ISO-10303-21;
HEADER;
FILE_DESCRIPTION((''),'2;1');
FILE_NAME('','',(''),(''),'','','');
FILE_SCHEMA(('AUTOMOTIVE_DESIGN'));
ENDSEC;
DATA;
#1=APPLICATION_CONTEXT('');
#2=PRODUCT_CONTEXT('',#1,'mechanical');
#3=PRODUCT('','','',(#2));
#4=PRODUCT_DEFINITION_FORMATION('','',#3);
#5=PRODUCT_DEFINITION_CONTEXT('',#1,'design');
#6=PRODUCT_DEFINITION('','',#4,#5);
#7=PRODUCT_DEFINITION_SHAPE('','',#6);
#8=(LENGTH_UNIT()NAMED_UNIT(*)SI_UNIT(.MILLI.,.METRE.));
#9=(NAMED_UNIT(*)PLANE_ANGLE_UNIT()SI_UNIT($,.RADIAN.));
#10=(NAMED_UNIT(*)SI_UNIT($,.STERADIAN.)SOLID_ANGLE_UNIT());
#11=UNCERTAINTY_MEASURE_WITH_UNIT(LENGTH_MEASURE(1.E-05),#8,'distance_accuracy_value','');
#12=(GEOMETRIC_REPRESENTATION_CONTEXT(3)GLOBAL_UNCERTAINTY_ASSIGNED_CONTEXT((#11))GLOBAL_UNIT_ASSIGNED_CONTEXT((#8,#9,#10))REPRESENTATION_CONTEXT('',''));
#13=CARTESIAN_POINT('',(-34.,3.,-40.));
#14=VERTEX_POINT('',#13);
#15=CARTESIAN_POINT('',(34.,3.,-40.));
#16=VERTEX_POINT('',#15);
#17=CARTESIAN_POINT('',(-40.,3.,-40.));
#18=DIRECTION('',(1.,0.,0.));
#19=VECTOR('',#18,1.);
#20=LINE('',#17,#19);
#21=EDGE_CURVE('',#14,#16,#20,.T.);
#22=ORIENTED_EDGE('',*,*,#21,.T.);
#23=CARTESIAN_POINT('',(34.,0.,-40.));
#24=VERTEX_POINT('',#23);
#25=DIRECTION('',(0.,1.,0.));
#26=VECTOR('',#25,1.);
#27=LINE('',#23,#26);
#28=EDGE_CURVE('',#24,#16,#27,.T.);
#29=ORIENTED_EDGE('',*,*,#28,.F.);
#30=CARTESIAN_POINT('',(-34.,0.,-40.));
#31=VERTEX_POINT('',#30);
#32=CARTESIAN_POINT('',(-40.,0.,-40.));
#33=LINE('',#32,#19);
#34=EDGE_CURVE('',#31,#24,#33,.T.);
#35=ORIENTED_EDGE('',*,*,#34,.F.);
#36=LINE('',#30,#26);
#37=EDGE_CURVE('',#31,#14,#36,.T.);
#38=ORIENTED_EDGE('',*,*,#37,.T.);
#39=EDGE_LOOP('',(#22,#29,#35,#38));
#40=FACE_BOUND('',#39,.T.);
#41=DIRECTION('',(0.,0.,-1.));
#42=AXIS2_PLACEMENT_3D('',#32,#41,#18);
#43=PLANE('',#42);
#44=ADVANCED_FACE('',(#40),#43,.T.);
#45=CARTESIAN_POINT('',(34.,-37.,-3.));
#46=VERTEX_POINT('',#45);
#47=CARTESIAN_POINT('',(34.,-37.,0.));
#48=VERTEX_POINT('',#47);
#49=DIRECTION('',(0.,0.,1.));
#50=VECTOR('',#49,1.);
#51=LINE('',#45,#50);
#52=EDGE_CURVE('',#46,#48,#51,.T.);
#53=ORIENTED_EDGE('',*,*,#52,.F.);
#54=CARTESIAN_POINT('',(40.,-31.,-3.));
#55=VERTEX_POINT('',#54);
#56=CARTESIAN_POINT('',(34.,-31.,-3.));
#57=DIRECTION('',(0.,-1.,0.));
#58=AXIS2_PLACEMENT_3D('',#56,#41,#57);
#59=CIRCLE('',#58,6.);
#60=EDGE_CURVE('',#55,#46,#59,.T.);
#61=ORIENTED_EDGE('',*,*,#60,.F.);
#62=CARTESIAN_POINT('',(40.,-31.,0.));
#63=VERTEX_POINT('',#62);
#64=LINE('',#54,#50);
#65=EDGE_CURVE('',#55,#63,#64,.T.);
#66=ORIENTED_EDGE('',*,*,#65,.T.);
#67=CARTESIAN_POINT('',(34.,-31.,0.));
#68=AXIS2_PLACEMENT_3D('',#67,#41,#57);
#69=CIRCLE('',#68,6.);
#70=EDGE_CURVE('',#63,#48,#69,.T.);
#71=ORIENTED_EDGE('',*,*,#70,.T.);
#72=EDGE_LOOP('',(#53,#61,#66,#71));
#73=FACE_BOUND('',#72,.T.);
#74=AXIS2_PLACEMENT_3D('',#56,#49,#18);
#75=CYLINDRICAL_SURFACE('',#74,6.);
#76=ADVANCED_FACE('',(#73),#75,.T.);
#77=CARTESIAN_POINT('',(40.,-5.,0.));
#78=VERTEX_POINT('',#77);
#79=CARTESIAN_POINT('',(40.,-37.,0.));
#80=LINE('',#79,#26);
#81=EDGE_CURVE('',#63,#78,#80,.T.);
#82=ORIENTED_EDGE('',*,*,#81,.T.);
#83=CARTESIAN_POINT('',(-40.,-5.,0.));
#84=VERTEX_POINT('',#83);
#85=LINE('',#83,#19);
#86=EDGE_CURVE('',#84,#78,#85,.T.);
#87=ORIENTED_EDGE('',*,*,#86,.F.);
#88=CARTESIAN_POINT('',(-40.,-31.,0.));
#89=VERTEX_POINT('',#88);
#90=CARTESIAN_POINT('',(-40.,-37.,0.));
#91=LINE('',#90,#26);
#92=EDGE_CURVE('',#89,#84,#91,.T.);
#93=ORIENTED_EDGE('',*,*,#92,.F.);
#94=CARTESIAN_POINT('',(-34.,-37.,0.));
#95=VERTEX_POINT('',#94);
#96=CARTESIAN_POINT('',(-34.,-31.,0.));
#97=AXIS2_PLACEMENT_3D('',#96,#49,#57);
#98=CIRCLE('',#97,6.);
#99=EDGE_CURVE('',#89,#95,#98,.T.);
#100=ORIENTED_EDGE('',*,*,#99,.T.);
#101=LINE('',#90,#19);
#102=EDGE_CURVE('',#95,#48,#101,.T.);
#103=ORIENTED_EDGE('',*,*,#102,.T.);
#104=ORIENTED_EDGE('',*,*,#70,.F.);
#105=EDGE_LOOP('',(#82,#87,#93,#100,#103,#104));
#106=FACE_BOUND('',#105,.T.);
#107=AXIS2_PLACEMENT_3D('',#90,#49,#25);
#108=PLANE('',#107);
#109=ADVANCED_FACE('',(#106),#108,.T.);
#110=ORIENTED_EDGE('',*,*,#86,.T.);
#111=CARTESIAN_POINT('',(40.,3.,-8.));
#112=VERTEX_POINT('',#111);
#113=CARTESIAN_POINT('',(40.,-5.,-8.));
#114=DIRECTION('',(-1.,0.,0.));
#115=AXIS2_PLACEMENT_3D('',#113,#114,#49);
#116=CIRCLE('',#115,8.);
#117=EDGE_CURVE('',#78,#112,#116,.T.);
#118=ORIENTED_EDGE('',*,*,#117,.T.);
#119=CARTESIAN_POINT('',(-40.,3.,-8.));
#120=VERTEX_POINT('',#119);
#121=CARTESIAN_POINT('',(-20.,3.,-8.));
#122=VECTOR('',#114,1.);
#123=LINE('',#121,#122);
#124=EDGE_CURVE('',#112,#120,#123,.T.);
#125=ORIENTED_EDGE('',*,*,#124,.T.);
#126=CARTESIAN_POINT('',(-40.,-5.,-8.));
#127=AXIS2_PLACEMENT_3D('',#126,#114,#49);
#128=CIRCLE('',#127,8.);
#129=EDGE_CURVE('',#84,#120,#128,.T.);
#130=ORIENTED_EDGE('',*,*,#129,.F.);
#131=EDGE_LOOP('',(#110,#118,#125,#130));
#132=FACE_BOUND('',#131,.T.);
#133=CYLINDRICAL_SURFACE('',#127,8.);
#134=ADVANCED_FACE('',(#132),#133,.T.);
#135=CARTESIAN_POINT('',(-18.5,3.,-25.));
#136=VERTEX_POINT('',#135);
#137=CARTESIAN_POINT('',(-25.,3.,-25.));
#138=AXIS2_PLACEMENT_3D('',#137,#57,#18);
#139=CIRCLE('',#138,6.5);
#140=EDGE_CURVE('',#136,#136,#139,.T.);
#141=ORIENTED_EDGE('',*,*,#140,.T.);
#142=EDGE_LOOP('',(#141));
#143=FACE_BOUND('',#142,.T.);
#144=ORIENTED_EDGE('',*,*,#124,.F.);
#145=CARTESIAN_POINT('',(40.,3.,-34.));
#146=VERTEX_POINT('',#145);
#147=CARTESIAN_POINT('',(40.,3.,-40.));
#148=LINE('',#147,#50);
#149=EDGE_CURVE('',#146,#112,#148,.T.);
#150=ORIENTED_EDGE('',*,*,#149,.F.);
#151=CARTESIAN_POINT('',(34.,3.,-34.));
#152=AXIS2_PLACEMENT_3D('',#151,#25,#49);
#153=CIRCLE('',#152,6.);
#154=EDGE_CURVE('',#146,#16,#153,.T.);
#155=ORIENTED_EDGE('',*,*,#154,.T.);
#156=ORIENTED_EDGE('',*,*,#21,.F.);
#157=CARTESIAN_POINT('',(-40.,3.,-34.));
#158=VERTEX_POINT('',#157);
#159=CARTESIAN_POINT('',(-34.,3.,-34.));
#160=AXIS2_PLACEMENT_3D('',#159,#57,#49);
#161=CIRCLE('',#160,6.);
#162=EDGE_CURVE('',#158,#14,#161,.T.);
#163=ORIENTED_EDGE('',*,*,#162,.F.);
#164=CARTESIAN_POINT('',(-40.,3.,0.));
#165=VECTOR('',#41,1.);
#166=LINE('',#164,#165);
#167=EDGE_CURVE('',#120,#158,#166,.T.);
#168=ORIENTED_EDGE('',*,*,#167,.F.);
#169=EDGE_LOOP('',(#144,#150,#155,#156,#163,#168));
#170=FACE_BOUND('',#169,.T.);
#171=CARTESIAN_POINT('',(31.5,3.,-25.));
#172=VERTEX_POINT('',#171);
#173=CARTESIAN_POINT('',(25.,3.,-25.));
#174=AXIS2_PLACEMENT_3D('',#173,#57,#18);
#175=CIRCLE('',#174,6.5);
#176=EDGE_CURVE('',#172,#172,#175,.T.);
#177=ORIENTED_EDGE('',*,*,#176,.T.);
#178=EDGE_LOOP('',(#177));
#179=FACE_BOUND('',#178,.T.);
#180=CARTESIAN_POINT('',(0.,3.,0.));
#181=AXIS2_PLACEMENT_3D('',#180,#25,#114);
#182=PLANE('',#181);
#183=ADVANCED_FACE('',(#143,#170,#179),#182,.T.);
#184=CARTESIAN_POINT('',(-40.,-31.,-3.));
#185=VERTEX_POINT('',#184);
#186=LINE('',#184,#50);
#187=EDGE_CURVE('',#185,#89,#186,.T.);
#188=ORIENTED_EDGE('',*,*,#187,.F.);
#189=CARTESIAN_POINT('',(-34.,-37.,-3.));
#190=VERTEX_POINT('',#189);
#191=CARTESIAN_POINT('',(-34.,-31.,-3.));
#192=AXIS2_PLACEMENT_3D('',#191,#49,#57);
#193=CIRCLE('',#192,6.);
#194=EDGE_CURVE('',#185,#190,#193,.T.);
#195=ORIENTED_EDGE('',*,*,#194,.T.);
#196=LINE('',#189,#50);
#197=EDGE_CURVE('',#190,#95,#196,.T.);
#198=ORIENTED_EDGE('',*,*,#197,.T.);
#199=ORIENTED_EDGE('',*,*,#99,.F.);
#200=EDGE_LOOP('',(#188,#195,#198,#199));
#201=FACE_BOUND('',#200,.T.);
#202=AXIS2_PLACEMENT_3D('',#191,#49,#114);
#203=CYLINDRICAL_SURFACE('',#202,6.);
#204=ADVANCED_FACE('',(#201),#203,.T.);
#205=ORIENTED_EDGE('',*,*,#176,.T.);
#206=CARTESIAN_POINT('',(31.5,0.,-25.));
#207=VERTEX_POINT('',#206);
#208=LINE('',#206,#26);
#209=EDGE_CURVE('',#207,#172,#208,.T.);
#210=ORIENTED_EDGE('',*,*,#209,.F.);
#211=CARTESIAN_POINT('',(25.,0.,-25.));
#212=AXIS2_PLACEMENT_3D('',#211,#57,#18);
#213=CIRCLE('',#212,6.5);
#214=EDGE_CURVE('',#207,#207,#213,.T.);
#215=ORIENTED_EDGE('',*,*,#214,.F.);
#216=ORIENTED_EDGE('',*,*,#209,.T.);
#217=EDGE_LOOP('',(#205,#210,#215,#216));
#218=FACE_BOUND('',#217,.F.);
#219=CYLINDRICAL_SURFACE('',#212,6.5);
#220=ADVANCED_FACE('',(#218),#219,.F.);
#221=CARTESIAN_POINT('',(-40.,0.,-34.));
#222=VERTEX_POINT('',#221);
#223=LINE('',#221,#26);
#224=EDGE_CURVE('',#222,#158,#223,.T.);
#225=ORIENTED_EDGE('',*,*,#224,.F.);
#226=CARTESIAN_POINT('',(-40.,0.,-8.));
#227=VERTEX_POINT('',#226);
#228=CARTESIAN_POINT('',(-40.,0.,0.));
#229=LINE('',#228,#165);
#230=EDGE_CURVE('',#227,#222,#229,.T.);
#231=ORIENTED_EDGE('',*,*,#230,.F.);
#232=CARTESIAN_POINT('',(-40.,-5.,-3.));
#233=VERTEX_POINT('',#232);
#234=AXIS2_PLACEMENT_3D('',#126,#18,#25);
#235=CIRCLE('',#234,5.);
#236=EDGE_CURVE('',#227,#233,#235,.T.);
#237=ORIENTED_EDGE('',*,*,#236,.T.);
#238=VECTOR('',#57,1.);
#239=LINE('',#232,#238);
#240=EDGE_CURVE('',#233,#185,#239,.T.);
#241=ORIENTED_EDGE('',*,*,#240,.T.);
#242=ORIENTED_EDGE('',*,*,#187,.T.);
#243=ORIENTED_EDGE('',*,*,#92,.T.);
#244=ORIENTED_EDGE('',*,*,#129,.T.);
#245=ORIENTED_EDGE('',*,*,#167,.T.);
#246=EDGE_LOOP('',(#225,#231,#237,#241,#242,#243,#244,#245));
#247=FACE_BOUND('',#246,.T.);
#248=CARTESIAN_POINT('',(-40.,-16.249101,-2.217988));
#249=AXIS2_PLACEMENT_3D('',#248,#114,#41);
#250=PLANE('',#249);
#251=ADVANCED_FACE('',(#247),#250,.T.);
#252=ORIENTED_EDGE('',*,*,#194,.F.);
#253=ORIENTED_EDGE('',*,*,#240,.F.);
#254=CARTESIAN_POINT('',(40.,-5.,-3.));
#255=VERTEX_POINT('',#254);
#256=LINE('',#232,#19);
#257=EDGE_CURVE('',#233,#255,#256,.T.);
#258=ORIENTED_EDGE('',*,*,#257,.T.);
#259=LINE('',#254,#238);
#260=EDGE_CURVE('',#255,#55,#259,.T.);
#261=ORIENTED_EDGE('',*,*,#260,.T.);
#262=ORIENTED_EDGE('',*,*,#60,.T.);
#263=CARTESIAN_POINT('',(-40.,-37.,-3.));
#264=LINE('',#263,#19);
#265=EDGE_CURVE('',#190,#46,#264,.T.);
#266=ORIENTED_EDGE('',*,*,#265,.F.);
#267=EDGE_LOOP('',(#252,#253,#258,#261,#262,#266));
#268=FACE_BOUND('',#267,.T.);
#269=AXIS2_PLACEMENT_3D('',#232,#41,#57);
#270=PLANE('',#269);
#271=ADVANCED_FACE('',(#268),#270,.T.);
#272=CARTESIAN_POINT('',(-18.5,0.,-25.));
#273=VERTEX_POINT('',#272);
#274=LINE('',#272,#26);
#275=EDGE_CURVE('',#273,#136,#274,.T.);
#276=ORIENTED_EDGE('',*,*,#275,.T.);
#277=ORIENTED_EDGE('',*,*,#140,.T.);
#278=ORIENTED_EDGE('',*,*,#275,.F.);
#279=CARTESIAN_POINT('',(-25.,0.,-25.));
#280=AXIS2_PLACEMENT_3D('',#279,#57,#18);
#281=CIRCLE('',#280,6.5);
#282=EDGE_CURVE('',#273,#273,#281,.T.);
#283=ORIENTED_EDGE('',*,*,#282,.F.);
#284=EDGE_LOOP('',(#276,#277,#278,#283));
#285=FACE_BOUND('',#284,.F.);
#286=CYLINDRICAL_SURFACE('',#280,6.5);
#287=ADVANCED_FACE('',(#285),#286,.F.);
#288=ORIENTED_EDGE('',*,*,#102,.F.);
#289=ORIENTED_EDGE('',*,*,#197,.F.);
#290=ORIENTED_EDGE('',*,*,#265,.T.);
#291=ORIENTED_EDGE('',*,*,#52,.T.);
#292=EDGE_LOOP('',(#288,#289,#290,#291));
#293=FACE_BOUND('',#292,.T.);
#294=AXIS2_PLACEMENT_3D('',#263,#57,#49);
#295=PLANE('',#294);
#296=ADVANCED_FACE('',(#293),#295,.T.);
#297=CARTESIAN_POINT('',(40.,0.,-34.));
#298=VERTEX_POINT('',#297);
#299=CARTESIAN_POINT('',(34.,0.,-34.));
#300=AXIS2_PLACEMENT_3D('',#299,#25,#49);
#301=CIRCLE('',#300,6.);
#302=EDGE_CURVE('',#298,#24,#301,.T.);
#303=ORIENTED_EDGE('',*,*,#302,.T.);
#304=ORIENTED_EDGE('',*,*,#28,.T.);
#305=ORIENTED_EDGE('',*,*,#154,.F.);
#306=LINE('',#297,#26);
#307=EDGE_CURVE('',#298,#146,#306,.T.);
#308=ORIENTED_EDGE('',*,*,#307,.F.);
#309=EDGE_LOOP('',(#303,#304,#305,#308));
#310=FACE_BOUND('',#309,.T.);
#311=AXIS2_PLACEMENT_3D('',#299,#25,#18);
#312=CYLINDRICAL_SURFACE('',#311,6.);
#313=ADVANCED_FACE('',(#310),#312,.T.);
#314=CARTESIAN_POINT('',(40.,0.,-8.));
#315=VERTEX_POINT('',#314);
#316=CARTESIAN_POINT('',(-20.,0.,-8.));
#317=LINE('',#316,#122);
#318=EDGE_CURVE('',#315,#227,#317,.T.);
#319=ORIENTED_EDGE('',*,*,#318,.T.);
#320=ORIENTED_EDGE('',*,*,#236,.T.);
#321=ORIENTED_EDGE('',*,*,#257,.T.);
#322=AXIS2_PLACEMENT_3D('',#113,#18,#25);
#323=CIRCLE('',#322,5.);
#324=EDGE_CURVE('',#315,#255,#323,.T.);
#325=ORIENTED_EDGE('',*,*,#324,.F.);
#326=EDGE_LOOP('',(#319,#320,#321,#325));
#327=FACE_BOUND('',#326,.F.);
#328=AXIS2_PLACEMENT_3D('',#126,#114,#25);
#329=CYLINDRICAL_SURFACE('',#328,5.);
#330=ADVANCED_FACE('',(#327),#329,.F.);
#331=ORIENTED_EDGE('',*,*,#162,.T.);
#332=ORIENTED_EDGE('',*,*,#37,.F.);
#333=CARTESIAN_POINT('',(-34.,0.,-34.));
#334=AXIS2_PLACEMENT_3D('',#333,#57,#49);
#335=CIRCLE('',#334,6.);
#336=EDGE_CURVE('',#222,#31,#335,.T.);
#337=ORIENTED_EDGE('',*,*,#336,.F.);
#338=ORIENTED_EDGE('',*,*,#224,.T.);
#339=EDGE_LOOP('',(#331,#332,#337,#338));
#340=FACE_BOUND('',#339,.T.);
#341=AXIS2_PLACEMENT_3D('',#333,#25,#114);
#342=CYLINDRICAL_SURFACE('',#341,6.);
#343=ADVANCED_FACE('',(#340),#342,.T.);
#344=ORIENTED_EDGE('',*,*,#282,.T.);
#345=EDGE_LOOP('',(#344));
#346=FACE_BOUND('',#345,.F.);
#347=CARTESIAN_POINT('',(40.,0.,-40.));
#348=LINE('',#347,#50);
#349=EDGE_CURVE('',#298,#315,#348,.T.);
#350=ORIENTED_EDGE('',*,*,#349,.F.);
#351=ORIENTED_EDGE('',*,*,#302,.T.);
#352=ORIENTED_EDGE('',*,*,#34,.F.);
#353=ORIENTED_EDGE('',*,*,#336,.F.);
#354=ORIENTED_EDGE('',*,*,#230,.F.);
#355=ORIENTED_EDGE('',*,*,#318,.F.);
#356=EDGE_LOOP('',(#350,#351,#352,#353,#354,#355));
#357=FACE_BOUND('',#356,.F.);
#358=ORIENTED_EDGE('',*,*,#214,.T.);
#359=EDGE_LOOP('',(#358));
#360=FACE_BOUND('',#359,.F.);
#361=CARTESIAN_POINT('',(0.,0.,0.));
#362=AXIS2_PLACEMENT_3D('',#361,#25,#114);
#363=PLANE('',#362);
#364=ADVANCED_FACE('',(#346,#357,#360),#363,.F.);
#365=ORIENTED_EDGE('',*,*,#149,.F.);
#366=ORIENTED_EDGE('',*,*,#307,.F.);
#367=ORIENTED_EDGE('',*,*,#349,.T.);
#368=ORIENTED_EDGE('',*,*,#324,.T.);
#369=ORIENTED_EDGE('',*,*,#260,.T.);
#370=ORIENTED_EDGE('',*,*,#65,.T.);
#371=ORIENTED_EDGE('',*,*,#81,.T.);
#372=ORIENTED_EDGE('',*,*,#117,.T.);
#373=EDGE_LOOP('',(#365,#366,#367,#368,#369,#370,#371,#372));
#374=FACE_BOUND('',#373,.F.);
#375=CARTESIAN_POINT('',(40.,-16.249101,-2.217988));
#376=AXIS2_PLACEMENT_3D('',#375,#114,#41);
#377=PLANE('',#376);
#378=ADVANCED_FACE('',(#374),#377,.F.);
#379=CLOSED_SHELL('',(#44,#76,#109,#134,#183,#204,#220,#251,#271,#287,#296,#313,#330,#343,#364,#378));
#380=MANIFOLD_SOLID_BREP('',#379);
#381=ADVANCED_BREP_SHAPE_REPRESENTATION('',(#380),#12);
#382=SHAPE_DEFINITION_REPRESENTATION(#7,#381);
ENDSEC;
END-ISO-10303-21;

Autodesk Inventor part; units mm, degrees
ref_plane "YZ Plane" through (0, 0, 0) normal (1, 0, 0) x (0, 1, 0)
ref_plane "XZ Plane" through (0, 0, 0) normal (0, 1, 0) x (-1, 0, 0)
ref_plane "XY Plane" through (0, 0, 0) normal (0, 0, 1) x (1, 0, 0)
sketch "Sketch4" plane through (0, 0, 0) normal (0, 1, 0) x (-1, 0, 0)
  line L0 (40, -40) -> (-40, -40)
  line L1 (-40, -40) -> (-40, 0)
  line L2 (-40, 0) -> (40, 0)
  line L3 (40, 0) -> (40, -40)
  point P0 (0, 0)
  point P1 (0, 0)
  dimension "d36" = 80
  dimension "d37" = 40
extrude "Plate2" add sketch "Sketch4" along normal blind 3
sketch "Sketch5" plane through (0, 0, 0) normal (0, -1, 0) x (1, 0, 0)
  circle A0 centre (-25, -25) radius 6.5
  circle A1 centre (25, -25) radius 6.5
  line L0 (0, 0) -> (0, -40) construction
  line L1 (40, -40) -> (-40, -40) construction
  dimension "d39" = 50
  dimension "d40" = 15
  dimension "d41" = 13
extrude "Cut1" cut sketch "Sketch5" against normal blind 3
sketch "Sketch6" plane through (-40, 3, -3) normal (0, 0, 1) x (1, 0, 0)
  line L0 (80, 0) -> (0, 0)
  line L1 (0, 0) -> (0, -40)
  line L2 (0, -40) -> (80, -40)
  line L3 (80, -40) -> (80, 0)
edge flange "Flange1" height 40 angle 90 thickness 3 bend radius 5 thickness toward (0, 0, 1) relief round relief width 3 relief depth 1.5 edges at (0, 0, 0) wall of the first edge with corners at (40, 3, -3) (-40, 3, -3) (-40, -37, -3) (40, -37, -3)
bend "Bend1"
corner "Corner1"
fillet "Corner Round6" radius 6 4 edges at (40, -37, -1.5) (-40, 1.5, -40) (40, 1.5, -40) (-40, -37, -1.5)
equation "\"d42\" = Thickness"
equation "\"d38\" = Thickness"
equation "\"d44\" = BendReliefWidth"
equation "\"d45\" = BendReliefDepth"
equation "\"d46\" = MinimumRemnant"
equation "\"d47\" = TransitionRadius"
equation "\"d50\" = BendRadius"
equation "\"d51\" = CornerReliefSize"
equation "\"d52\" = GapSize"
equation "\"d53\" = JacobiRadiusSize"
equation "\"BendReliefWidth\" = Thickness"
equation "\"BendReliefDepth\" = 0.5 * Thickness"
equation "\"CornerReliefSize\" = 4 * Thickness"
equation "\"MinimumRemnant\" = 2 * Thickness"
equation "\"TransitionRadius\" = BendRadius"
equation "\"JacobiRadiusSize\" = BendRadius"
equation "\"GapSize\" = Thickness"
equation "\"Thickness\" = 3"
equation "\"BendRadius\" = 5"
properties part number "MSC 912 flange slipway" material "Stainless Steel"
